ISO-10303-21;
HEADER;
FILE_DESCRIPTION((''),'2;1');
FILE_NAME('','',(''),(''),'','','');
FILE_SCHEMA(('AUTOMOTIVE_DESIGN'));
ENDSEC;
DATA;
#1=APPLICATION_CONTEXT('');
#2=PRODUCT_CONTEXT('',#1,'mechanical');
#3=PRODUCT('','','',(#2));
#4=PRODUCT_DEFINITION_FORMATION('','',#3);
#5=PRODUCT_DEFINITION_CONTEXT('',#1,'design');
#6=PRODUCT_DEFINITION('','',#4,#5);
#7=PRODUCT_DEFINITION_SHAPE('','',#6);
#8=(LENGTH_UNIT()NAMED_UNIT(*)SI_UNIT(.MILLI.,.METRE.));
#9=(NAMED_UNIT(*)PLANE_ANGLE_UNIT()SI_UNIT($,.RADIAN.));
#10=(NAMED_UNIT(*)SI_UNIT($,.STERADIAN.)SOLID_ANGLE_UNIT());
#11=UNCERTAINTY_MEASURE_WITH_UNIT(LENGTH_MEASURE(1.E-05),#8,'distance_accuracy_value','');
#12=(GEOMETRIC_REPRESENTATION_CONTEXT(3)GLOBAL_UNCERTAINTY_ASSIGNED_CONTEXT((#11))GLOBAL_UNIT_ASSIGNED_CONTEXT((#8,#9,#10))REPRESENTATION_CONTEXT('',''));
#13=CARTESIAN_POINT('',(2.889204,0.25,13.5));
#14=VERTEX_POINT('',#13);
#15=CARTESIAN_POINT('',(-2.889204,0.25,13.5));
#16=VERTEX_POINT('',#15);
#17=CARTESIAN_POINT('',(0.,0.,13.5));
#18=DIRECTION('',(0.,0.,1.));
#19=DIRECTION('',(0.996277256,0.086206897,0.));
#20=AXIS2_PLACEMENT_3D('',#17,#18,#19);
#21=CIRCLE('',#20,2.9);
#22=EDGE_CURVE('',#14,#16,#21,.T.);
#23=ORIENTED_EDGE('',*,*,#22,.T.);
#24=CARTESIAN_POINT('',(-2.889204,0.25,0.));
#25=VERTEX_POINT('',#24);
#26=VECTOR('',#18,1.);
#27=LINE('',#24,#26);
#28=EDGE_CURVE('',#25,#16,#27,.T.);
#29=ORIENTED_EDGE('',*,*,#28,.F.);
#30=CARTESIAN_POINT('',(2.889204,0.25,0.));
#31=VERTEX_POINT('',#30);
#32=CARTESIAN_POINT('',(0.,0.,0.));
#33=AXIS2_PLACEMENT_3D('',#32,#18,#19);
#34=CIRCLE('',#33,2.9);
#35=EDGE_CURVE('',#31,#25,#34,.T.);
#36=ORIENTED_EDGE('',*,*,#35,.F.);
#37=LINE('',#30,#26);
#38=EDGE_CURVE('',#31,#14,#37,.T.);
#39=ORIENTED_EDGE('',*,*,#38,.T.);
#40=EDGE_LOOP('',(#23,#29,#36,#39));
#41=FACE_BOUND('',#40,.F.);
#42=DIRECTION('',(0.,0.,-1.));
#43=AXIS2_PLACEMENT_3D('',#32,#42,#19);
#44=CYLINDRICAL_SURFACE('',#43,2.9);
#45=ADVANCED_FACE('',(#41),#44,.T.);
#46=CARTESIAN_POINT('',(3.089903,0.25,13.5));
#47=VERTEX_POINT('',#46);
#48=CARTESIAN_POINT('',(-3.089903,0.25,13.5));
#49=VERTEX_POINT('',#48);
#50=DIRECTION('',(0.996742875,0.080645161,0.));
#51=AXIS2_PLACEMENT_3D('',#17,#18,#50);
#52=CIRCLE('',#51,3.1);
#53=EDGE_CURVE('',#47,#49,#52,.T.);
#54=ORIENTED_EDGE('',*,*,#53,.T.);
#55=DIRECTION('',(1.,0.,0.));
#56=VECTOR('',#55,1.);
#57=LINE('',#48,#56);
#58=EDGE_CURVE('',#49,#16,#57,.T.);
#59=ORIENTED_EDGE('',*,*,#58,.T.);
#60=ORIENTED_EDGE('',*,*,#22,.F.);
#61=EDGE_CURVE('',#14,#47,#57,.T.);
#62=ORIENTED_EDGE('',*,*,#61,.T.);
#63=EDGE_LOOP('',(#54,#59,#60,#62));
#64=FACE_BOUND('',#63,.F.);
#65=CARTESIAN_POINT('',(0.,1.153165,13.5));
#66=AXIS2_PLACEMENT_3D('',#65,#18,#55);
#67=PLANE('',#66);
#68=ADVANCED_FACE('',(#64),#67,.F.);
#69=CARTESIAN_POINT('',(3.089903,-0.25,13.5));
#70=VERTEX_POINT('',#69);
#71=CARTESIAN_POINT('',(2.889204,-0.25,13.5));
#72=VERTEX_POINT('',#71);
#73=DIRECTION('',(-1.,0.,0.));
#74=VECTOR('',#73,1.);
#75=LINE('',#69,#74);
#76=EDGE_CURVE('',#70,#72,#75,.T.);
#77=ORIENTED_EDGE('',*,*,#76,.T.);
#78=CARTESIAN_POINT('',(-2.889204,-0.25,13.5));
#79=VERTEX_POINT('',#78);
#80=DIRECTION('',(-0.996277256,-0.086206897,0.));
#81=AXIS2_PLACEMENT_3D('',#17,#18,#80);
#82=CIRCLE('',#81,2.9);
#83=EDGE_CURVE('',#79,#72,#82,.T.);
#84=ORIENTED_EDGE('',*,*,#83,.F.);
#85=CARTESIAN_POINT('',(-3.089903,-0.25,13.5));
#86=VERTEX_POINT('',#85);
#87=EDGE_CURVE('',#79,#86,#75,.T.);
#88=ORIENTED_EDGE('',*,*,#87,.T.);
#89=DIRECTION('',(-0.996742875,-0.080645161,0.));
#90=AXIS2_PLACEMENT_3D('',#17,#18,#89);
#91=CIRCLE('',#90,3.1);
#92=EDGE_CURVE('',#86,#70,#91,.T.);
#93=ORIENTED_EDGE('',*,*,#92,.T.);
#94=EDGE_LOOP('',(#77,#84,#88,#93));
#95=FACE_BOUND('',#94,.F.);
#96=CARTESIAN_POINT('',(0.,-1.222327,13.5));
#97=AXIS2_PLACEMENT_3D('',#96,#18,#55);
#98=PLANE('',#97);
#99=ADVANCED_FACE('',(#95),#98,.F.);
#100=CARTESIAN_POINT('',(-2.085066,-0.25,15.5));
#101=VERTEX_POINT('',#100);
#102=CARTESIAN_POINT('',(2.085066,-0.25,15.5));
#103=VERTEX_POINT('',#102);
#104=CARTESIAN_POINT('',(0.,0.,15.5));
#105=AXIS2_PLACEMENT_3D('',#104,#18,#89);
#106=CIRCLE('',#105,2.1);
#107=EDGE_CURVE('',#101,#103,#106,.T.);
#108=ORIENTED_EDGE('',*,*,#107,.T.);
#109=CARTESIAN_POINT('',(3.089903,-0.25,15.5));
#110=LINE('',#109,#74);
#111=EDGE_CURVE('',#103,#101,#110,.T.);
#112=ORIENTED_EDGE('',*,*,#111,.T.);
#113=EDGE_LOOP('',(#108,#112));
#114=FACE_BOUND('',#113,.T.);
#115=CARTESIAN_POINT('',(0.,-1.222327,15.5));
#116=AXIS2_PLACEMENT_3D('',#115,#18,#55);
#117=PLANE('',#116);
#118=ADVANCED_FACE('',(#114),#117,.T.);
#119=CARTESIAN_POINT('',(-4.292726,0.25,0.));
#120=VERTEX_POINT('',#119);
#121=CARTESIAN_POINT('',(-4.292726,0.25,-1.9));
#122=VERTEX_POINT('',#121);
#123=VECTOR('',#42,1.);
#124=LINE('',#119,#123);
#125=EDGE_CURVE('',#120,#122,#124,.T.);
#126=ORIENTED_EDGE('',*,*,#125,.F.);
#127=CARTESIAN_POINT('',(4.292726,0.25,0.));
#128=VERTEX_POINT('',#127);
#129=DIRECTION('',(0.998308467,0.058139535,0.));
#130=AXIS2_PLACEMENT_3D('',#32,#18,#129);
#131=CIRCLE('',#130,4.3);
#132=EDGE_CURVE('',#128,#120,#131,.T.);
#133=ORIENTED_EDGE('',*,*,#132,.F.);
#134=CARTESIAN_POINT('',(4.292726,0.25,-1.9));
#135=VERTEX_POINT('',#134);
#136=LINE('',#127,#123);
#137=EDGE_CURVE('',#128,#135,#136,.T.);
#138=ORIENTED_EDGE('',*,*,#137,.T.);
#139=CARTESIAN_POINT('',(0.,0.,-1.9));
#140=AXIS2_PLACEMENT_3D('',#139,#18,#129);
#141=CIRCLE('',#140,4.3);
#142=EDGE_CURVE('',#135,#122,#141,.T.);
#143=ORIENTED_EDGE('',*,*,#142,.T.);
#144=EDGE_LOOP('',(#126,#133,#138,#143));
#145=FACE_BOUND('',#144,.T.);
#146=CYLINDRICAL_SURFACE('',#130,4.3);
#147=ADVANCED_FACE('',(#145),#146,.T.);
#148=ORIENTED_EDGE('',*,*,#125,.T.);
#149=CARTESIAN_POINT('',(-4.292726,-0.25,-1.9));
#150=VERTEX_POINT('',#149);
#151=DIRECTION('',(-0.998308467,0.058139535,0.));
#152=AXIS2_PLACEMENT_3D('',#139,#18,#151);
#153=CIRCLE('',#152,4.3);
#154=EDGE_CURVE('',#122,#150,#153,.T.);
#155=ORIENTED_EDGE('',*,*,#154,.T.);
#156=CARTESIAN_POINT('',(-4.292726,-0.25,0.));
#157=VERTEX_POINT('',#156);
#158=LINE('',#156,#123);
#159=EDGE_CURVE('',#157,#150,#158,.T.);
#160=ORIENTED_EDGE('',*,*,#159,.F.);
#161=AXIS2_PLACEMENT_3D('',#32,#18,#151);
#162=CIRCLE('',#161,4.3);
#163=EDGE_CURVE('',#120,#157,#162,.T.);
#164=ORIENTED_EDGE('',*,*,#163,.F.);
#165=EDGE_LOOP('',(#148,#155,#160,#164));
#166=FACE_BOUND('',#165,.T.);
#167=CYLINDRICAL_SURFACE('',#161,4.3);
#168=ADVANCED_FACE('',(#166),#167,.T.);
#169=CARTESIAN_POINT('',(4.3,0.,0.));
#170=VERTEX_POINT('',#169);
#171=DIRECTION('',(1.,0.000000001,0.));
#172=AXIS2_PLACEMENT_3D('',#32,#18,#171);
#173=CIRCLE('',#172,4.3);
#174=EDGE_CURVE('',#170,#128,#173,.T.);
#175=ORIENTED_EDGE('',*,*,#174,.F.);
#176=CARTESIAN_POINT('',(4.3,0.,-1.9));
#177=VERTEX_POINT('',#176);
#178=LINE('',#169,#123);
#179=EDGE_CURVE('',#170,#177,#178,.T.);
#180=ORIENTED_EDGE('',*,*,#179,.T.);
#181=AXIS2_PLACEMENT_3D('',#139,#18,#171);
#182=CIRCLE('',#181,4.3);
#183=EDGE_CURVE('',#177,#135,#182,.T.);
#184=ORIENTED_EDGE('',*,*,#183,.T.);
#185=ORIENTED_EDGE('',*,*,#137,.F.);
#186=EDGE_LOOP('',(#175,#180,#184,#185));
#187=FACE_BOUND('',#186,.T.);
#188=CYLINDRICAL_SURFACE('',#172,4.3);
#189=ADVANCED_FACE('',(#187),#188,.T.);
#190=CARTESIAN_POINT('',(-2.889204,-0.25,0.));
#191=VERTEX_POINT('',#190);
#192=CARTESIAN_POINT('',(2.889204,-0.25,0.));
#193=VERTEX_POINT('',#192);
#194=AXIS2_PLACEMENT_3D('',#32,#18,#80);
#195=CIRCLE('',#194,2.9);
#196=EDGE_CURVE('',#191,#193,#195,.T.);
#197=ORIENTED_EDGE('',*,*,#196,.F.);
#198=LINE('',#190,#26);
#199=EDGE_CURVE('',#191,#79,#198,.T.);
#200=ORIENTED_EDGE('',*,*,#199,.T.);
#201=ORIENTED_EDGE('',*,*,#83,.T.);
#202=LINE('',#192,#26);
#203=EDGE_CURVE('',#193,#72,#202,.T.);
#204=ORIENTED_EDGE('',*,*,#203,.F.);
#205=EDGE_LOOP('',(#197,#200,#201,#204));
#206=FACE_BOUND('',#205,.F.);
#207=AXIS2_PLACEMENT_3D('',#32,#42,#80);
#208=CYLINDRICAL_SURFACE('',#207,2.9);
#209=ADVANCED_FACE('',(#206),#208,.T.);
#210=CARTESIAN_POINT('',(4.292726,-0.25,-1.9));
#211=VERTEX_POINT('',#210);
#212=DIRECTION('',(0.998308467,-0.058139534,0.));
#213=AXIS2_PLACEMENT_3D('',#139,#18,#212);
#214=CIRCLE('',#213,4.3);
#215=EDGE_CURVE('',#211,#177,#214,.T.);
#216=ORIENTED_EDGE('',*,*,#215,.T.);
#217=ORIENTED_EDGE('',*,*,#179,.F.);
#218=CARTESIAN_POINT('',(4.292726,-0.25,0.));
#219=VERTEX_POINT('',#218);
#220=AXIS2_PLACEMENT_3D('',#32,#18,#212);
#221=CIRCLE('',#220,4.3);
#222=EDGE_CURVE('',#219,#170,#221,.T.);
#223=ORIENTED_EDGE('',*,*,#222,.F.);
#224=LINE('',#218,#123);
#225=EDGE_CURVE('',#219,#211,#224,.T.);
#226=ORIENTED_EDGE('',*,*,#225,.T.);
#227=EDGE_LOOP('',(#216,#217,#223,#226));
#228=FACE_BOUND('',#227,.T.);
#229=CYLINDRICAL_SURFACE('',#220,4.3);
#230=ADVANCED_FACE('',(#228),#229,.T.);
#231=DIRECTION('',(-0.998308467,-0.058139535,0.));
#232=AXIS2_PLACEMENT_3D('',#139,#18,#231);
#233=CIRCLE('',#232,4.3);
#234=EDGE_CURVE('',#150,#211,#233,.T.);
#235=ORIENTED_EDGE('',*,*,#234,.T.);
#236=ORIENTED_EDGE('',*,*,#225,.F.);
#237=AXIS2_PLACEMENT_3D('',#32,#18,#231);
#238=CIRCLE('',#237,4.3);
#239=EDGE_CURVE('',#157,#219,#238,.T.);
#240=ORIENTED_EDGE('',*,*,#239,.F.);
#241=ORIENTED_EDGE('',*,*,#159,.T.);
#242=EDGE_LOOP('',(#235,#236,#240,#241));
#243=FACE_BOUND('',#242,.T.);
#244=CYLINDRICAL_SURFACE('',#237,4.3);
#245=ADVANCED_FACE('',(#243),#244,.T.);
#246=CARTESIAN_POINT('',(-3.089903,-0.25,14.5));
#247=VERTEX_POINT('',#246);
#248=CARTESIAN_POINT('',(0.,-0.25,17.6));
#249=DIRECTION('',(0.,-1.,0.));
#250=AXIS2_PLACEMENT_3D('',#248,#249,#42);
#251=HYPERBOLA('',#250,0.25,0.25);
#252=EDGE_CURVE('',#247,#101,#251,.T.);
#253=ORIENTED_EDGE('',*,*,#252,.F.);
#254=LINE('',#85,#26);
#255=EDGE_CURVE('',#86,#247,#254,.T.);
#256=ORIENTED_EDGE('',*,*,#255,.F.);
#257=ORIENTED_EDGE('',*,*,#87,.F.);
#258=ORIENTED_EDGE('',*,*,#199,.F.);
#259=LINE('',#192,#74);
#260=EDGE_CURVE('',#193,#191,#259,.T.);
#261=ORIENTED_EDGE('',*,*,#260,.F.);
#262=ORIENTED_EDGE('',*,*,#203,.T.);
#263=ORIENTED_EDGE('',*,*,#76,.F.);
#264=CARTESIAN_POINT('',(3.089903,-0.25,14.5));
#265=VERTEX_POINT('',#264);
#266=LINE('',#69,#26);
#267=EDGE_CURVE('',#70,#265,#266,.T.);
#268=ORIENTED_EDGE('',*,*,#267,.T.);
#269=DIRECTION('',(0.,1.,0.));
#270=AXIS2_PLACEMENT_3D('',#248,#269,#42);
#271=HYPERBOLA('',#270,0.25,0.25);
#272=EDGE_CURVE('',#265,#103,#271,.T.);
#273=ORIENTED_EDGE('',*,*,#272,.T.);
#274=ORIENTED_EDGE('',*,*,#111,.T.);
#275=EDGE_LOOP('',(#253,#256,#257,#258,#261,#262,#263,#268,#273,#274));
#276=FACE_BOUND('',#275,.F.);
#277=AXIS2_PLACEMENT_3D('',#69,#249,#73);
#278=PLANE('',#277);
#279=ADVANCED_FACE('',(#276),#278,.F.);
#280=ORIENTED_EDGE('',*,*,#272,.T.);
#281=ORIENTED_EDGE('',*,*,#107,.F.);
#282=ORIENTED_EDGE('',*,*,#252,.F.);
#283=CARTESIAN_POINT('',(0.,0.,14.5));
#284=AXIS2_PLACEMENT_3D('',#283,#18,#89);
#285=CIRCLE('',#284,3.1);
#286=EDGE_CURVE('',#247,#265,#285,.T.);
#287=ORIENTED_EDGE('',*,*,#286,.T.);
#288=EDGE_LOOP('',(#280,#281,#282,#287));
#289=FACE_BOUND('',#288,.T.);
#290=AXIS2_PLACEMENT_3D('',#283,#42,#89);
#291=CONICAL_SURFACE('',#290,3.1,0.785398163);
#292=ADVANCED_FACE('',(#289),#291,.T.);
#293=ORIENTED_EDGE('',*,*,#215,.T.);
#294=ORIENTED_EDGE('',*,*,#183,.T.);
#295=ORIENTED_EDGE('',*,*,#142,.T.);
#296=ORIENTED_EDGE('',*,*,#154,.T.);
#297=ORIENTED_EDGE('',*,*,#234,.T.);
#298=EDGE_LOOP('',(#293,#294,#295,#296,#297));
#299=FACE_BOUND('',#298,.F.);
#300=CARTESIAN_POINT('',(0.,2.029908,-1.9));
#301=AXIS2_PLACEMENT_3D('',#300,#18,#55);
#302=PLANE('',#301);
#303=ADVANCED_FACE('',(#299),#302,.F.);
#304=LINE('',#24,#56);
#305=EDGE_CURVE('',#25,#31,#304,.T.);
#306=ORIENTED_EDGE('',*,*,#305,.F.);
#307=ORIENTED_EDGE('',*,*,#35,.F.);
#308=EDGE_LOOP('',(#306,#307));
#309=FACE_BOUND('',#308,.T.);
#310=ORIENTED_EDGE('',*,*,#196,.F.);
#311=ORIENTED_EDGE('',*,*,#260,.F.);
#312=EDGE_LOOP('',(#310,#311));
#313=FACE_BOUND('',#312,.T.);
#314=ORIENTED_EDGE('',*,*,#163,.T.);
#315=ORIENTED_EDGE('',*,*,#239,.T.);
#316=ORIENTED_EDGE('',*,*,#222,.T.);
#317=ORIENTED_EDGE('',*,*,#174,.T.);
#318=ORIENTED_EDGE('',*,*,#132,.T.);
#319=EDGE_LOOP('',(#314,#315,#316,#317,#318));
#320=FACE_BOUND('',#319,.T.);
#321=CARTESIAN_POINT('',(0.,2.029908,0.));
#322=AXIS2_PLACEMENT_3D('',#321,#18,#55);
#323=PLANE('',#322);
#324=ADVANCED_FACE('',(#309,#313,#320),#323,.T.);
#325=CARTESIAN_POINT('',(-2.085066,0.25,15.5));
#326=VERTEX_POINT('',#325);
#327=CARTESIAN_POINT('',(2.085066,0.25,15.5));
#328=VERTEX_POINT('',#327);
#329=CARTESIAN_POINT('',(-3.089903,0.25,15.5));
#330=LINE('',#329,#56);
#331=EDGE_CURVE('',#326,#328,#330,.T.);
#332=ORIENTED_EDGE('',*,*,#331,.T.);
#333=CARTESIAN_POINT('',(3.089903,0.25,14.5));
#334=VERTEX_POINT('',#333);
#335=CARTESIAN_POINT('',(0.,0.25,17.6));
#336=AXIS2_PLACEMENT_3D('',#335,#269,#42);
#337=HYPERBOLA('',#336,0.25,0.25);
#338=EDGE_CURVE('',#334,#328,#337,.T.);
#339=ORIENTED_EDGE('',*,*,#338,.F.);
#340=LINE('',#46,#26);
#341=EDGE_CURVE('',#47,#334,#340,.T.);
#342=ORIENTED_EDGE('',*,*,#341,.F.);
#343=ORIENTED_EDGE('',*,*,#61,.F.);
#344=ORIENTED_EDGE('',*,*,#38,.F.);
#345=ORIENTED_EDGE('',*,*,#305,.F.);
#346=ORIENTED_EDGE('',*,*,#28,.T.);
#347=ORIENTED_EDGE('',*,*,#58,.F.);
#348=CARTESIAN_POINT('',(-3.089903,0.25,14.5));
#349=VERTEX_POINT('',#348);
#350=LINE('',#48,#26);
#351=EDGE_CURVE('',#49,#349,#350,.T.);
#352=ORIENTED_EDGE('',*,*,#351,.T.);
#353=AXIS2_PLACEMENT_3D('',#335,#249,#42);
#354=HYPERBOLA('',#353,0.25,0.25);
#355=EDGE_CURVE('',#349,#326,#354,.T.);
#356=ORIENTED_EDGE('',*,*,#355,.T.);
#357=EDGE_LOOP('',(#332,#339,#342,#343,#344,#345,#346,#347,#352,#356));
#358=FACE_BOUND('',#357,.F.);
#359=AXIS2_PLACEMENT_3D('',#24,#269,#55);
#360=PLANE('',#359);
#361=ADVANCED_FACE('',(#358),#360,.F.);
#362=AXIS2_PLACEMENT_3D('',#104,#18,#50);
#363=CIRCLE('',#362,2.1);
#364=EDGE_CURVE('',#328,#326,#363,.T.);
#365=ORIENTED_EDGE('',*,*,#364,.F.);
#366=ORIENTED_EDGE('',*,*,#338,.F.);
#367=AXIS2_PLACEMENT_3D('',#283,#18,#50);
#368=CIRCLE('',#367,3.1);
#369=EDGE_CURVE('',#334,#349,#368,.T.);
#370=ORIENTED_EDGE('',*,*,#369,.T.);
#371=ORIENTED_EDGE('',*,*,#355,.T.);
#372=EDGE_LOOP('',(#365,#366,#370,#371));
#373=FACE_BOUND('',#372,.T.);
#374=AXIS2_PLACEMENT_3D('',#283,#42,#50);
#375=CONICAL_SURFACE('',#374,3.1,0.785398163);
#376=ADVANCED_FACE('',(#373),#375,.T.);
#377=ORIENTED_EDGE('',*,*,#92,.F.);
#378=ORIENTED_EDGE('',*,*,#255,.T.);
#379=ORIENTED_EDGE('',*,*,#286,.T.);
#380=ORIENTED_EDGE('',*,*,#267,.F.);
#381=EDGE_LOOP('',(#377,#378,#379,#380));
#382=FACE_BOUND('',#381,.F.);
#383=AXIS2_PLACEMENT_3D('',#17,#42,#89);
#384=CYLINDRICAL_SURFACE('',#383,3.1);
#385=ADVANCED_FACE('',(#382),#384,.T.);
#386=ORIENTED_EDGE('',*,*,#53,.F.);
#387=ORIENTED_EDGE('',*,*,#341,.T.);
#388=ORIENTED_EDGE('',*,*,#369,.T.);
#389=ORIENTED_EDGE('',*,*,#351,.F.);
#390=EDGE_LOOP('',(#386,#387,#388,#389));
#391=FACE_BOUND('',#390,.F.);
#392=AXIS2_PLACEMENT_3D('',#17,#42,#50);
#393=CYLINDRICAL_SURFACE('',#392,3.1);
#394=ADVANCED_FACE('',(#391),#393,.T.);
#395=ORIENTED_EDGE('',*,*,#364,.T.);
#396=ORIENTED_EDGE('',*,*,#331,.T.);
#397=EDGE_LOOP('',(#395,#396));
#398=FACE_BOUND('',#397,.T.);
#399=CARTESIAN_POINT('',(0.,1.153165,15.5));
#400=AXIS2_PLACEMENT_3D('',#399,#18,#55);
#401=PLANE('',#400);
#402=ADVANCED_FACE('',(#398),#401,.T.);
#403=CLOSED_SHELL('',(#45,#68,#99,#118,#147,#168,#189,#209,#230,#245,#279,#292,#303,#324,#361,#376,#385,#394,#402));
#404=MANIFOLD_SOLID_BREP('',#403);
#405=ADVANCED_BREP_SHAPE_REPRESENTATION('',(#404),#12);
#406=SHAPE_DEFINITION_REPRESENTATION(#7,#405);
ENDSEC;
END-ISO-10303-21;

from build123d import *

# Parameters (mm, degrees)
F1_DEPTH = 1.9
F2_DEPTH = 13.5
F4_DEPTH = 2
F5_SIZE  = 1


with BuildPart() as f1:
    # F0 (on Top) → F1 (new body)
    with BuildSketch(Plane.XY):
        with BuildLine():
            Line((2.8892040426, 0.25), (4.2927264064, 0.25))
            ThreePointArc((4.2927264064, 0.25), (0, 4.3), (-4.2927264064, 0.25))
            Line((-4.2927264064, 0.25), (-2.8892040426, 0.25))
            ThreePointArc((-2.8892040426, 0.25), (0, 2.9), (2.8892040426, 0.25))
        make_face()
        with BuildLine():
            Line((0, 0.25), (2.8892040426, 0.25))
            ThreePointArc((2.8892040426, 0.25), (0, 2.9), (-2.8892040426, 0.25))
            Line((-2.8892040426, 0.25), (0, 0.25))
        make_face()
        with BuildLine():
            Line((-2.8892040426, 0.25), (-4.2927264064, 0.25))
            ThreePointArc((-4.2927264064, 0.25), (-4.3, 0), (-4.2927264064, -0.25))
            Line((-4.2927264064, -0.25), (-2.8892040426, -0.25))
            ThreePointArc((-2.8892040426, -0.25), (-2.9, 0), (-2.8892040426, 0.25))
        make_face()
        with BuildLine():
            ThreePointArc((4.2927264064, -0.25), (4.2981812169, -0.125052894), (4.3, 0))
            ThreePointArc((4.3, 0), (4.2981812169, 0.125052894), (4.2927264064, 0.25))
            Line((4.2927264064, 0.25), (2.8892040426, 0.25))
            ThreePointArc((2.8892040426, 0.25), (2.8972997535, 0.1251164984), (2.9, 0))
            ThreePointArc((2.9, 0), (2.8972997535, -0.1251164984), (2.8892040426, -0.25))
            Line((2.8892040426, -0.25), (4.2927264064, -0.25))
        make_face()
        with BuildLine():
            ThreePointArc((-4.2927264064, -0.25), (0, -4.3), (4.2927264064, -0.25))
            Line((4.2927264064, -0.25), (2.8892040426, -0.25))
            ThreePointArc((2.8892040426, -0.25), (0, -2.9), (-2.8892040426, -0.25))
            Line((-2.8892040426, -0.25), (-4.2927264064, -0.25))
        make_face()
        with BuildLine():
            ThreePointArc((-2.8892040426, -0.25), (0, -2.9), (2.8892040426, -0.25))
            Line((2.8892040426, -0.25), (0, -0.25))
            Line((0, -0.25), (-2.8892040426, -0.25))
        make_face()
        with BuildLine():
            ThreePointArc((2.9, 0), (2.8972997535, 0.1251164984), (2.8892040426, 0.25))
            Line((2.8892040426, 0.25), (0, 0.25))
            Line((0, 0.25), (-2.8892040426, 0.25))
            ThreePointArc((-2.8892040426, 0.25), (-2.9, 0), (-2.8892040426, -0.25))
            Line((-2.8892040426, -0.25), (0, -0.25))
            Line((0, -0.25), (2.8892040426, -0.25))
            ThreePointArc((2.8892040426, -0.25), (2.8972997535, -0.1251164984), (2.9, 0))
        make_face()
    extrude(amount=-F1_DEPTH)

    # F0 (on Top) → F2 (join)
    with BuildSketch(Plane.XY):
        with BuildLine():
            ThreePointArc((-2.8892040426, -0.25), (0, -2.9), (2.8892040426, -0.25))
            Line((2.8892040426, -0.25), (0, -0.25))
            Line((0, -0.25), (-2.8892040426, -0.25))
        make_face()
        with BuildLine():
            Line((0, 0.25), (2.8892040426, 0.25))
            ThreePointArc((2.8892040426, 0.25), (0, 2.9), (-2.8892040426, 0.25))
            Line((-2.8892040426, 0.25), (0, 0.25))
        make_face()
    extrude(amount=F2_DEPTH)

    # F3 (on face) → F4 (join)
    with BuildSketch(Plane.XY.offset(13.5)):
        with BuildLine():
            ThreePointArc((-3.0899029111, -0.25), (0, -3.1), (3.0899029111, -0.25))
            Line((3.0899029111, -0.25), (0, -0.25))
            Line((0, -0.25), (-3.0899029111, -0.25))
        make_face()
        with BuildLine():
            Line((0, 0.25), (2.8892040426, 0.25))
            ThreePointArc((2.8892040426, 0.25), (0, 2.9), (-2.8892040426, 0.25))
            Line((-2.8892040426, 0.25), (0, 0.25))
        make_face()
        with BuildLine():
            Line((2.8892040426, 0.25), (3.0899029111, 0.25))
            ThreePointArc((3.0899029111, 0.25), (0, 3.1), (-3.0899029111, 0.25))
            Line((-3.0899029111, 0.25), (-2.8892040426, 0.25))
            ThreePointArc((-2.8892040426, 0.25), (0, 2.9), (2.8892040426, 0.25))
        make_face()
    extrude(amount=F4_DEPTH)

    # F5
    f5_edges = [f1.edges().sort_by_distance(p)[0] for p in [
        (0, 3.1, 15.5),
        (0, -3.1, 15.5),
    ]]
    chamfer(f5_edges, length=F5_SIZE)


solid = f1.part
